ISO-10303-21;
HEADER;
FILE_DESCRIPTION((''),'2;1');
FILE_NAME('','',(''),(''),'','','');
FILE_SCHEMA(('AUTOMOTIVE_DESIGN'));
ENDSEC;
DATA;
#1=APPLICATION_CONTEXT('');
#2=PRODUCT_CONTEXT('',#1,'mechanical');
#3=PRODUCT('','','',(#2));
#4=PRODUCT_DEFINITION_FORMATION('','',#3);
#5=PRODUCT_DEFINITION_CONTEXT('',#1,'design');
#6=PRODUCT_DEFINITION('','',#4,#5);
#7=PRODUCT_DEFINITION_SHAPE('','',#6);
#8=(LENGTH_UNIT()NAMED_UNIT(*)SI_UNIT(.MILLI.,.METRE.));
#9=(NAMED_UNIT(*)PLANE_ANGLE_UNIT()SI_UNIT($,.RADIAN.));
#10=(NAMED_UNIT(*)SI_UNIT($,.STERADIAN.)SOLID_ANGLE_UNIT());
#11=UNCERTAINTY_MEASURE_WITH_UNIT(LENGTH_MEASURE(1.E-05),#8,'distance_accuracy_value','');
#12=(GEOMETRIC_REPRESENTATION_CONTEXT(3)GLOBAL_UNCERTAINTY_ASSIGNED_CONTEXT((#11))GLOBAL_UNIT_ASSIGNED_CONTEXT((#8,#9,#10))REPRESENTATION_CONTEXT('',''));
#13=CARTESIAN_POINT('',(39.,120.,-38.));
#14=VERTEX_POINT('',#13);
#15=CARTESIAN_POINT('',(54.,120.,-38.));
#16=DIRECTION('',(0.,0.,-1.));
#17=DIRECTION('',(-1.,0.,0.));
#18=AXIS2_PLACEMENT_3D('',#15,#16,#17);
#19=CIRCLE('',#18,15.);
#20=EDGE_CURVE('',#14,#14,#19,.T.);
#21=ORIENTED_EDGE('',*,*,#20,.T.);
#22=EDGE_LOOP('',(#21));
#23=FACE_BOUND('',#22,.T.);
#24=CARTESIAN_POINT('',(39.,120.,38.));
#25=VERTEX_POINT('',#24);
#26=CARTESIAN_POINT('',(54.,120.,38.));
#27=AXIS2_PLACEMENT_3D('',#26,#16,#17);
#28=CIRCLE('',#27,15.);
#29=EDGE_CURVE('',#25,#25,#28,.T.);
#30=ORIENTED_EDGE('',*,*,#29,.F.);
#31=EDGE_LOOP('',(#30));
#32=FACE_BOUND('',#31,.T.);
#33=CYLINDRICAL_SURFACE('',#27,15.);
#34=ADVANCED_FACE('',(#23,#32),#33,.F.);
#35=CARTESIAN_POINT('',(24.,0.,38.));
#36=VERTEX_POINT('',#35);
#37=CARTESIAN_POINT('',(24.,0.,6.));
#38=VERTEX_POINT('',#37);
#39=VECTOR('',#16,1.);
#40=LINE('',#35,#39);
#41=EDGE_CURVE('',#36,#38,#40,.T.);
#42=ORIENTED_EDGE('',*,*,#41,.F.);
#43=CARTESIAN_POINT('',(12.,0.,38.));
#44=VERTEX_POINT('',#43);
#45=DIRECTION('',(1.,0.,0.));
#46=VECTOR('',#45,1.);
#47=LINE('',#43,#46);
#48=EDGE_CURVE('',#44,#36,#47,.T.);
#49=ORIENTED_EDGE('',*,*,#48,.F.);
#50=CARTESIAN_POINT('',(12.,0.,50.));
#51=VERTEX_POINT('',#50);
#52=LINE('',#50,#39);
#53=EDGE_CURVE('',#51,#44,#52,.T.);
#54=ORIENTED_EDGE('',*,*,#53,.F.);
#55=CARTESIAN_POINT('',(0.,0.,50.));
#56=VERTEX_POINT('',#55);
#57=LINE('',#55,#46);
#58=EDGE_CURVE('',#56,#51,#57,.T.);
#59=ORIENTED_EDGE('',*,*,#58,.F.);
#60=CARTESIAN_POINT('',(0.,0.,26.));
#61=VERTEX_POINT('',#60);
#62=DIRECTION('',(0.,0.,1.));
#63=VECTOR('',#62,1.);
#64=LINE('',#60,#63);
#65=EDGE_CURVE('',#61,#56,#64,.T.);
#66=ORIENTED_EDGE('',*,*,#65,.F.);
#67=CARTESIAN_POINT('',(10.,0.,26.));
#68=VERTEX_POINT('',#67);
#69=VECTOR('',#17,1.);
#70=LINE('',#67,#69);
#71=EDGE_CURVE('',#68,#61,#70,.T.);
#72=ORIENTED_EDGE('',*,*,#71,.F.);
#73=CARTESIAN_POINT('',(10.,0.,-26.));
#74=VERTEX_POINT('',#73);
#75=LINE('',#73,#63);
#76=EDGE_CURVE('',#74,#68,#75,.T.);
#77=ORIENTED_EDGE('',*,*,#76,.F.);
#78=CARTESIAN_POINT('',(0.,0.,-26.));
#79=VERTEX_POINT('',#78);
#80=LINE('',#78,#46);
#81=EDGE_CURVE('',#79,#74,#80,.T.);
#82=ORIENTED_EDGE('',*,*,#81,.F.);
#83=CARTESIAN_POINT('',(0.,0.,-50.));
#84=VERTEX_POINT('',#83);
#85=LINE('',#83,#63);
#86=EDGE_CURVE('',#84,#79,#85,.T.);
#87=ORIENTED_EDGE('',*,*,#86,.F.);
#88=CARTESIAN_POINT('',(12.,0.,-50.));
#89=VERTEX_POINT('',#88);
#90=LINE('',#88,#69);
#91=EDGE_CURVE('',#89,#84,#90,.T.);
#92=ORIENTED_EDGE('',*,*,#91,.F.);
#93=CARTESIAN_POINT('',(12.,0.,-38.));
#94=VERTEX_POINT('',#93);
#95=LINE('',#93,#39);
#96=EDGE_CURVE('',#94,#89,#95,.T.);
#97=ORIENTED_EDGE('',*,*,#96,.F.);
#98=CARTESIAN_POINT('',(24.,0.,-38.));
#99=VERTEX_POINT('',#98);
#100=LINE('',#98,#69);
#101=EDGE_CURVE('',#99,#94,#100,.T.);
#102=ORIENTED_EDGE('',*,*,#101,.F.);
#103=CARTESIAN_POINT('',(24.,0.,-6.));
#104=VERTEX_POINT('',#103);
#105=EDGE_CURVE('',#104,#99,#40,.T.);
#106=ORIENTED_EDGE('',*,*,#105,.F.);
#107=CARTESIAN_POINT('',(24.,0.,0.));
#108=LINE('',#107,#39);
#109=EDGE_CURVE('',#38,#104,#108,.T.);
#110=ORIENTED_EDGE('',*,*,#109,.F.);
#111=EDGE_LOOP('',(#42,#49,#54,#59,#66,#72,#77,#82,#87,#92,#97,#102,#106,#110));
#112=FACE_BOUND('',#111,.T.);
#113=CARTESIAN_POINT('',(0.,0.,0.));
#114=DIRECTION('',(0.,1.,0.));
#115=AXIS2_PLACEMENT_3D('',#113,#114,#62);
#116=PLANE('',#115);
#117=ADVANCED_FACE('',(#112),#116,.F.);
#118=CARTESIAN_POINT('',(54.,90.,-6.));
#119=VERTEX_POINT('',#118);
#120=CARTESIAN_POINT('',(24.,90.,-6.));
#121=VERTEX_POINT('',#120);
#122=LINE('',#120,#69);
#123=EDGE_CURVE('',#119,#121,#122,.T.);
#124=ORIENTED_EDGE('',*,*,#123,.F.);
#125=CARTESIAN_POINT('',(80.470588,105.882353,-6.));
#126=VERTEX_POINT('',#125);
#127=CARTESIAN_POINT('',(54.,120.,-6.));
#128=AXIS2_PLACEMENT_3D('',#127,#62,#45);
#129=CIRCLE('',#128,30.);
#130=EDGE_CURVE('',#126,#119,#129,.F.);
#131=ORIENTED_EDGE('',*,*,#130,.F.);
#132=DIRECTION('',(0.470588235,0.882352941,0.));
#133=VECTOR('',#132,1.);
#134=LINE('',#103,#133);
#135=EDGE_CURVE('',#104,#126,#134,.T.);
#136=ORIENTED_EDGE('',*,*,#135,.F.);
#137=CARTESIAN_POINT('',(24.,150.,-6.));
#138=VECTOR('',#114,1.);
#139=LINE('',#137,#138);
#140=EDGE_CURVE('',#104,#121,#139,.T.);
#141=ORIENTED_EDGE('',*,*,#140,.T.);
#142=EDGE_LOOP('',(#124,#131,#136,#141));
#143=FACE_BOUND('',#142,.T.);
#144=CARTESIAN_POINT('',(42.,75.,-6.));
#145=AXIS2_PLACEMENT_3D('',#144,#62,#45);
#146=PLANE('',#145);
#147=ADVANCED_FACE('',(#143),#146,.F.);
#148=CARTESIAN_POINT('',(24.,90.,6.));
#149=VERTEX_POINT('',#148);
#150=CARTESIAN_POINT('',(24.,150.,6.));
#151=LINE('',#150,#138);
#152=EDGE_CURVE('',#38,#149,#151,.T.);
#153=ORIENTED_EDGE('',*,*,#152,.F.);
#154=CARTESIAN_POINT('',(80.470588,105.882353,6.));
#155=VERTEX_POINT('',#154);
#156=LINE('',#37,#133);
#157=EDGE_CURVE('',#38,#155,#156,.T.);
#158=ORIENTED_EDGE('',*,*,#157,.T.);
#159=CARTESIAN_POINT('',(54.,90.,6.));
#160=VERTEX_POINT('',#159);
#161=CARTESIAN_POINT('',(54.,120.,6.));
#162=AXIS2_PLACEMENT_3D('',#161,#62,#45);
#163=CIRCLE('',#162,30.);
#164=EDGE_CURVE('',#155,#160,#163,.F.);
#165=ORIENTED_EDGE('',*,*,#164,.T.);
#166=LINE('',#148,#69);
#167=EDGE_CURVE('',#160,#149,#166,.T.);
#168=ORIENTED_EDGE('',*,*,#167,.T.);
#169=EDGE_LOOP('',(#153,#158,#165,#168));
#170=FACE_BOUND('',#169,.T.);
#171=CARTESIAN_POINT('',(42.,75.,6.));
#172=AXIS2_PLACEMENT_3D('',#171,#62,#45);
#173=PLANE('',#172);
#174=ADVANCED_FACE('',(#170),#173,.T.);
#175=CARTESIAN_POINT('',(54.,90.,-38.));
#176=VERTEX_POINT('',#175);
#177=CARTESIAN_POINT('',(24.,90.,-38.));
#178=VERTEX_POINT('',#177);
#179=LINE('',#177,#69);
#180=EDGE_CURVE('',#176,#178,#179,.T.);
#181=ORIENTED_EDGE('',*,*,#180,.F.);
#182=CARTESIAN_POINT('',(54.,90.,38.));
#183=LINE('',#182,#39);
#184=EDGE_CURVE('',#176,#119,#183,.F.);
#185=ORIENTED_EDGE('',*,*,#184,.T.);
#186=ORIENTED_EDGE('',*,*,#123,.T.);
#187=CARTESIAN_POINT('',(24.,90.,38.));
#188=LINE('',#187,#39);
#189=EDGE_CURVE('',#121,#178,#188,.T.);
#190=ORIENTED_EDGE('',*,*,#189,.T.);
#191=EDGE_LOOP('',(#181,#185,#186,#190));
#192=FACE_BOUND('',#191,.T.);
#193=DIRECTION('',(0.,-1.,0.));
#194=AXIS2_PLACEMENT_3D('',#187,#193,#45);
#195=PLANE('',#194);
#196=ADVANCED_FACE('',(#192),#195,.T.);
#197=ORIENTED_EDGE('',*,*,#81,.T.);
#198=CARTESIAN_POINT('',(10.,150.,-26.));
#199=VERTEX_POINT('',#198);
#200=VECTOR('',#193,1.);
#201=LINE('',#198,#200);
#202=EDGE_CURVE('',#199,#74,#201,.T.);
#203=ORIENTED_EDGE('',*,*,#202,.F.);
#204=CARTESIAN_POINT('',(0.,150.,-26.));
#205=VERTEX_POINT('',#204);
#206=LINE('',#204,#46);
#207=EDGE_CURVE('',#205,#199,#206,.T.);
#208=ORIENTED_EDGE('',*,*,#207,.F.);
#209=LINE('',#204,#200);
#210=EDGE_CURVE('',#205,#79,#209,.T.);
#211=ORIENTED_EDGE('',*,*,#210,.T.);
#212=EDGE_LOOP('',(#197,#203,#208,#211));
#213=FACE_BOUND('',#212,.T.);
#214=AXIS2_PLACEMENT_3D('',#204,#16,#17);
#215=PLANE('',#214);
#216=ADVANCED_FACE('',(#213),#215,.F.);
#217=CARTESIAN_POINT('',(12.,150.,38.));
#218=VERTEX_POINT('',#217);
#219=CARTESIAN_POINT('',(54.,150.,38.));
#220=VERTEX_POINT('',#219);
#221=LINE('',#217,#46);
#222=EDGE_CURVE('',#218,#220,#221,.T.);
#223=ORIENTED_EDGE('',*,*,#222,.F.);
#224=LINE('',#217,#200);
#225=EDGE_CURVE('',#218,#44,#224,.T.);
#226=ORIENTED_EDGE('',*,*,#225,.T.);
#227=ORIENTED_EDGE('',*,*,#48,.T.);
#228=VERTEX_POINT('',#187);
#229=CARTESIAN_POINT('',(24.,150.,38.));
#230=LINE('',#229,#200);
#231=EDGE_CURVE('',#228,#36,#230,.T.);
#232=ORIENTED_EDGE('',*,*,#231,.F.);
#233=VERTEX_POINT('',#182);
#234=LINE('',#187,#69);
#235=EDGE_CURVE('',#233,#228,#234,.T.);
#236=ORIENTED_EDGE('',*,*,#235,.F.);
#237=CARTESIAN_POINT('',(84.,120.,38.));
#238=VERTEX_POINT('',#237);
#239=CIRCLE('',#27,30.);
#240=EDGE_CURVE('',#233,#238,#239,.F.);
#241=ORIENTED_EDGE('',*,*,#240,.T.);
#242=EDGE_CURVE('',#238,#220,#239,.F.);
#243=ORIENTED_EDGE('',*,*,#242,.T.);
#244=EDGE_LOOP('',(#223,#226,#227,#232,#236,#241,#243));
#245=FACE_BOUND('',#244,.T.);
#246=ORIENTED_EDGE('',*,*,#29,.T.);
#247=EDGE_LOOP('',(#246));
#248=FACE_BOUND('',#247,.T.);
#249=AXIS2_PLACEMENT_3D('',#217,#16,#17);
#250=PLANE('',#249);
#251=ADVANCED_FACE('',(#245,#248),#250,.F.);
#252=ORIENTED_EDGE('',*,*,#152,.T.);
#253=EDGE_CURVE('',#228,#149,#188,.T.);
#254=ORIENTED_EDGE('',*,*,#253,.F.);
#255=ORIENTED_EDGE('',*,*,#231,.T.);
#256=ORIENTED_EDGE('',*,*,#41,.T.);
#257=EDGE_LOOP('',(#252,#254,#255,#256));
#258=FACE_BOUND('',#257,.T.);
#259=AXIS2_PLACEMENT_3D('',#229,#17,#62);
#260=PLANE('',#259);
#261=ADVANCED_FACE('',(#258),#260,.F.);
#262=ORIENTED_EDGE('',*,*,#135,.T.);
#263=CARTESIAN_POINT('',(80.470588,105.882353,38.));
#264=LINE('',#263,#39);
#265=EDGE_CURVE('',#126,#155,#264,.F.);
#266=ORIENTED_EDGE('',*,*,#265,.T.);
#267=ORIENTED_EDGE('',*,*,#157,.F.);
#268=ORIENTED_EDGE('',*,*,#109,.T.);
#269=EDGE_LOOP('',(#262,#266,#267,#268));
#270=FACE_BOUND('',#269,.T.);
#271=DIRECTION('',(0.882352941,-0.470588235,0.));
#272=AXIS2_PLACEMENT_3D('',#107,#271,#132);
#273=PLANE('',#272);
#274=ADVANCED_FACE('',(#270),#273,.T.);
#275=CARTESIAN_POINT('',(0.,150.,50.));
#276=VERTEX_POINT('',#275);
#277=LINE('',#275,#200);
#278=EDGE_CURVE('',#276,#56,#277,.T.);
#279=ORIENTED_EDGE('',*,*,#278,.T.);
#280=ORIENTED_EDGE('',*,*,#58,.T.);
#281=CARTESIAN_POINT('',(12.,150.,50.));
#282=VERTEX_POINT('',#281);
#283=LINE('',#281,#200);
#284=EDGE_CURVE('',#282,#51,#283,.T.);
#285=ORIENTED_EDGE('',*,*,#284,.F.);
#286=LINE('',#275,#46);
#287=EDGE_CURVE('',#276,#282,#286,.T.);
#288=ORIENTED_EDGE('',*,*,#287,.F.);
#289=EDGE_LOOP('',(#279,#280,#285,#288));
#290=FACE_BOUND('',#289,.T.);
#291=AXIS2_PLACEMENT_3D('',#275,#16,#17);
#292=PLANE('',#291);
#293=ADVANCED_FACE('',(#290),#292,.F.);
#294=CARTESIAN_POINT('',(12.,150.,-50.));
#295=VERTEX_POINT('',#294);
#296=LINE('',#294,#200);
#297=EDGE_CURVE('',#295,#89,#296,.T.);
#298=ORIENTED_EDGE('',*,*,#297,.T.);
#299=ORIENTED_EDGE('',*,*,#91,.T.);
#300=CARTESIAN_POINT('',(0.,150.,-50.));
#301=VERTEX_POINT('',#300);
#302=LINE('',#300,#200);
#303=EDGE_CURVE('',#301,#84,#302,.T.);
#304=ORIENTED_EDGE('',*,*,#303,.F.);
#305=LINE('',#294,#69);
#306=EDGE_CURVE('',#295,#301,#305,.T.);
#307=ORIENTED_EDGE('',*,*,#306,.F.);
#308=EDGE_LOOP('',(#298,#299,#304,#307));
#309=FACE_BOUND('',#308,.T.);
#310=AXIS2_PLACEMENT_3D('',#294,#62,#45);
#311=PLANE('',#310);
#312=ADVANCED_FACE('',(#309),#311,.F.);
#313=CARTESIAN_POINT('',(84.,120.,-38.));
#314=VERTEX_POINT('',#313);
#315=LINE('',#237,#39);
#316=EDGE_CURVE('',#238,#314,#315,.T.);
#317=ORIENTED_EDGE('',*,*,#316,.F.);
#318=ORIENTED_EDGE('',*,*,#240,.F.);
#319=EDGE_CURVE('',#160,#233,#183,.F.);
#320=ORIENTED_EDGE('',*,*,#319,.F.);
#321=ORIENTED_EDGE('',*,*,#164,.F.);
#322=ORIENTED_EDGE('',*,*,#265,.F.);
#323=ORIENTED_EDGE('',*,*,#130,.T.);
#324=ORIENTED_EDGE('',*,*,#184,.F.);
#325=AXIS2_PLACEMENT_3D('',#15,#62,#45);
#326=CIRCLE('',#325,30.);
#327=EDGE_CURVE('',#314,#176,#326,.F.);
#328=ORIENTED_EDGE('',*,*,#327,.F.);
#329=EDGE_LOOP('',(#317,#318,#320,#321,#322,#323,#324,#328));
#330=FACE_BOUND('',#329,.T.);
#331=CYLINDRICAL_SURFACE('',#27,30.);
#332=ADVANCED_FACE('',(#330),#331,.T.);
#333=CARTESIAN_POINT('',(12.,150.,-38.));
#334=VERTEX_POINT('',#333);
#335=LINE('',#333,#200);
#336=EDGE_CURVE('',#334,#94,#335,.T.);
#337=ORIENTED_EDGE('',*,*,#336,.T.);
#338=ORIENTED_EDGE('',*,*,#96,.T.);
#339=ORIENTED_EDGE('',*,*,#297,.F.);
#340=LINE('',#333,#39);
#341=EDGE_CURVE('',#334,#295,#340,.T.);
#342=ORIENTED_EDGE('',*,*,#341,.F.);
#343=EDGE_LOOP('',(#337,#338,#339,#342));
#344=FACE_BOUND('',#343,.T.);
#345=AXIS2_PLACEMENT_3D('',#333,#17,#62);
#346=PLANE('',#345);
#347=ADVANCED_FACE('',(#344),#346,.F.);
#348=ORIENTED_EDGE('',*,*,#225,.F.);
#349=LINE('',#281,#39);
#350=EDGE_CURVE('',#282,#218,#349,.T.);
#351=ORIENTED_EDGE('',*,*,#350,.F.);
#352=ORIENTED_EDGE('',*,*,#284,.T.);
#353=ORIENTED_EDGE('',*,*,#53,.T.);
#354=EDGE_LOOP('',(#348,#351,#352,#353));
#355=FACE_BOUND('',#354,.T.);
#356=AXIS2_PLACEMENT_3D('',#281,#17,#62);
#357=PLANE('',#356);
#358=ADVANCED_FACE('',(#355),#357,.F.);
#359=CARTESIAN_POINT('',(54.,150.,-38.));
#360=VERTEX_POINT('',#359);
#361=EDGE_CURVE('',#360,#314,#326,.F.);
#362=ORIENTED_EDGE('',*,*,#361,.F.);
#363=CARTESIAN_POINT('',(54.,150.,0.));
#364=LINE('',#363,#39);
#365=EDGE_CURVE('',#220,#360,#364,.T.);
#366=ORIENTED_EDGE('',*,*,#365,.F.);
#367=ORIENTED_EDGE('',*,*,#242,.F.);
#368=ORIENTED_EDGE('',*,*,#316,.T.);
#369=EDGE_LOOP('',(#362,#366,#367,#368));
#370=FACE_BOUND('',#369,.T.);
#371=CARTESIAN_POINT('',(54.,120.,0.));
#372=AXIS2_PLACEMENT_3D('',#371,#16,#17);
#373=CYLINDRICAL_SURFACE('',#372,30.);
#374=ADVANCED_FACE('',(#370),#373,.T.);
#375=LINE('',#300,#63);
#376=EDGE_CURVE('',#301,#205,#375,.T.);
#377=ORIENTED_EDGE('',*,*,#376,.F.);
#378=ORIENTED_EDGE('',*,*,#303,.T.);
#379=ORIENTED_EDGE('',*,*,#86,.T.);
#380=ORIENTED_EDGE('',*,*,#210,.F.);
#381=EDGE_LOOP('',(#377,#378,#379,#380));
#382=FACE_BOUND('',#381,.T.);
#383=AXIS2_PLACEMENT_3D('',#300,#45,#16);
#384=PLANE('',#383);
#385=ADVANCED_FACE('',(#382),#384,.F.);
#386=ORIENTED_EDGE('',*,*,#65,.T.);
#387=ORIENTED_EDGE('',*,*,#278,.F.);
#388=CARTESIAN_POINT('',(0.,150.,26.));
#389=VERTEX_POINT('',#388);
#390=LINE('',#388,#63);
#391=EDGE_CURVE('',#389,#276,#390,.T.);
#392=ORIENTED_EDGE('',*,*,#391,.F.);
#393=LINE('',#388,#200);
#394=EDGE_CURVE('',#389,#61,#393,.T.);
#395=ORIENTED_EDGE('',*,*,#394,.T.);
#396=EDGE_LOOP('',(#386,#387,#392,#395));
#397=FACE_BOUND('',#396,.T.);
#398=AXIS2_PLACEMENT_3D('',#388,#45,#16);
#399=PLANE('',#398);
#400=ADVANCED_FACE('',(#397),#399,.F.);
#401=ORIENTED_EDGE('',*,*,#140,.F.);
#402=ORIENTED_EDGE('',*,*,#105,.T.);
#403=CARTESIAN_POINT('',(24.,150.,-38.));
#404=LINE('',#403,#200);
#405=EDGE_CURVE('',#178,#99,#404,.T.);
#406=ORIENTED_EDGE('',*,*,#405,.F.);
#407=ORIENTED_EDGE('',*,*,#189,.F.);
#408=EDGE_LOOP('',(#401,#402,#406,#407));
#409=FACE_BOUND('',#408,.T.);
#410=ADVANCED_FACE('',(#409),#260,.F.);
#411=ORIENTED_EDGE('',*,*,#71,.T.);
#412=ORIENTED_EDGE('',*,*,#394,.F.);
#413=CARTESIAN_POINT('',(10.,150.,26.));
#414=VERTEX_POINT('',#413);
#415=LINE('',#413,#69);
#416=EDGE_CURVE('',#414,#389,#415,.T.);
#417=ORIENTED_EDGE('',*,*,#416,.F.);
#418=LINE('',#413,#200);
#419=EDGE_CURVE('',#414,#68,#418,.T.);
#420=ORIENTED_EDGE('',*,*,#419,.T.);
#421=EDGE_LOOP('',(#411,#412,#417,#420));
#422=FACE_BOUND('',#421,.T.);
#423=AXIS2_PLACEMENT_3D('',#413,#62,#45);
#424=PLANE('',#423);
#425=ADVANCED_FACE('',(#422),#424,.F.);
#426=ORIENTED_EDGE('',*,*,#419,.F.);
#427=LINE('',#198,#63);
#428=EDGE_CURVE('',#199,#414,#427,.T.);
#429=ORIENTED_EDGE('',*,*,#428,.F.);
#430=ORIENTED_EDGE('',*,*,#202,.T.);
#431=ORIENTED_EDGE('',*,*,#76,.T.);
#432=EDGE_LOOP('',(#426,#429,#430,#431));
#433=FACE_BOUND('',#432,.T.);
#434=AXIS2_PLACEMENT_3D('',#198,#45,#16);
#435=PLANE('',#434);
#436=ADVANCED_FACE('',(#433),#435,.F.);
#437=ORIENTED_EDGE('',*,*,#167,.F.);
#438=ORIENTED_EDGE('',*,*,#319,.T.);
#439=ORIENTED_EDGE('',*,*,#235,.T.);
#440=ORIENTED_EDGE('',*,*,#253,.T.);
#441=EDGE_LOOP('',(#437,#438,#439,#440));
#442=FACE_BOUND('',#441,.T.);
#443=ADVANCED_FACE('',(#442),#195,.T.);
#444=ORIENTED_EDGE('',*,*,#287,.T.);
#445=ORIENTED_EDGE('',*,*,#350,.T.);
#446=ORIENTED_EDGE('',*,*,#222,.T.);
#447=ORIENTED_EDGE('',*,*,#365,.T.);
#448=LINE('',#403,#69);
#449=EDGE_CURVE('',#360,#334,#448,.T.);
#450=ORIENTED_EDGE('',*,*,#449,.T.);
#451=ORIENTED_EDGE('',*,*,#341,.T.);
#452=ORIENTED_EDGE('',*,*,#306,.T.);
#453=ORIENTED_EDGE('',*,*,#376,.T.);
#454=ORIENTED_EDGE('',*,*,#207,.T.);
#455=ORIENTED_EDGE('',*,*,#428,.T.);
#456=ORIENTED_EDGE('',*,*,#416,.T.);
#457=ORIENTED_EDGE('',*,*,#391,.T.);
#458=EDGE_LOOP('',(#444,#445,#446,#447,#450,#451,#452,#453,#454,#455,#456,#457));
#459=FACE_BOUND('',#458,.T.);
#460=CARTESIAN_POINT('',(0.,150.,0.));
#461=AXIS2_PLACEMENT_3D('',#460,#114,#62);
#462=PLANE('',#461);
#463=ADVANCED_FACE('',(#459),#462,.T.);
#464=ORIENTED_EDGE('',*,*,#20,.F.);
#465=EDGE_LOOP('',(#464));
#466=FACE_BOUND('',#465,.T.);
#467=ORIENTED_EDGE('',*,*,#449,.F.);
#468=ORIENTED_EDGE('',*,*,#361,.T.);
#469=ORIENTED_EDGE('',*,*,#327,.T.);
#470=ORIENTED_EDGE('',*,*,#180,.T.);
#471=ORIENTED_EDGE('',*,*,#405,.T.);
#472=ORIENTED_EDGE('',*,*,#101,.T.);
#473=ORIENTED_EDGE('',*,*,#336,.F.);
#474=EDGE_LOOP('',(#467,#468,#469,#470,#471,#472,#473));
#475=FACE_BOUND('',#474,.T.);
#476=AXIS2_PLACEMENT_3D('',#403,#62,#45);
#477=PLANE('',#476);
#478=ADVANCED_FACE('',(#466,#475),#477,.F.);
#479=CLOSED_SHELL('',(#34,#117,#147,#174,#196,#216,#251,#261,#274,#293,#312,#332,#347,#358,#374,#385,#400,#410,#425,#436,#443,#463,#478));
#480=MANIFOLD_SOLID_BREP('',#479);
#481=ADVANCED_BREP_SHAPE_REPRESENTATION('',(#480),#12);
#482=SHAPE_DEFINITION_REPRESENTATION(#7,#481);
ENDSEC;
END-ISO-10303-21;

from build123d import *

# Parameters (mm, degrees)
BOSS_EXTRUDE1_DEPTH = 150
SKETCH2_W           = 60
SKETCH2_H           = 60
SKETCH2_R           = 15
BOSS_EXTRUDE2_DEPTH = 76
FILLET1_R           = 30
RIB4_REACH          = 181.042
SKETCH5_WALL_W      = 480.08378995
SKETCH5_WALL_H      = 12


with BuildPart() as part:
    # Sketch1 → Boss-Extrude1 (new body)
    with BuildSketch(Plane(origin=(0, 0, 0), x_dir=(1, 0, 0), z_dir=(0, 1, 0))):
        Polygon((0, 50), (0, 26), (10, 26), (10, -26), (0, -26), (0, -50), (12, -50), (12, -38), (24, -38), (24, 38), (12, 38), (12, 50), align=None)
    extrude(amount=BOSS_EXTRUDE1_DEPTH)

    # Sketch2 → Boss-Extrude2 (add)
    with BuildSketch(Plane(origin=(0, 0, -38), x_dir=(-1, 0, 0), z_dir=(0, 0, -1))):
        with Locations((-54, 120)):
            Rectangle(SKETCH2_W, SKETCH2_H)
        with Locations((-54, 120)):
            Circle(SKETCH2_R, mode=Mode.SUBTRACT)
    extrude(amount=-BOSS_EXTRUDE2_DEPTH)

    # Fillet1
    fillet1_edges = [part.edges().sort_by_distance(p)[0] for p in [
        (84, 150, 0),
        (84, 90, 0),
    ]]
    fillet(fillet1_edges, radius=FILLET1_R - 0.0001)  # a hair under: the kernel refuses the full size

    # Sketch5 wall → Rib4 (add, up to next)
    with BuildSketch(Plane(origin=(52.235294323, 52.941176856, 0), x_dir=(0.470588235292, 0.882352941178, 0), z_dir=(-0.882352941178, 0.470588235292, 0)), mode=Mode.PRIVATE) as rib4_sk1:
        Rectangle(SKETCH5_WALL_W, SKETCH5_WALL_H)
    rib4_tool1 = extrude(rib4_sk1.sketch, amount=RIB4_REACH, mode=Mode.PRIVATE) - part.part
    add(rib4_tool1.solids().sort_by_distance((52.235294323, 52.941176856, 0))[0])


solid = part.part
